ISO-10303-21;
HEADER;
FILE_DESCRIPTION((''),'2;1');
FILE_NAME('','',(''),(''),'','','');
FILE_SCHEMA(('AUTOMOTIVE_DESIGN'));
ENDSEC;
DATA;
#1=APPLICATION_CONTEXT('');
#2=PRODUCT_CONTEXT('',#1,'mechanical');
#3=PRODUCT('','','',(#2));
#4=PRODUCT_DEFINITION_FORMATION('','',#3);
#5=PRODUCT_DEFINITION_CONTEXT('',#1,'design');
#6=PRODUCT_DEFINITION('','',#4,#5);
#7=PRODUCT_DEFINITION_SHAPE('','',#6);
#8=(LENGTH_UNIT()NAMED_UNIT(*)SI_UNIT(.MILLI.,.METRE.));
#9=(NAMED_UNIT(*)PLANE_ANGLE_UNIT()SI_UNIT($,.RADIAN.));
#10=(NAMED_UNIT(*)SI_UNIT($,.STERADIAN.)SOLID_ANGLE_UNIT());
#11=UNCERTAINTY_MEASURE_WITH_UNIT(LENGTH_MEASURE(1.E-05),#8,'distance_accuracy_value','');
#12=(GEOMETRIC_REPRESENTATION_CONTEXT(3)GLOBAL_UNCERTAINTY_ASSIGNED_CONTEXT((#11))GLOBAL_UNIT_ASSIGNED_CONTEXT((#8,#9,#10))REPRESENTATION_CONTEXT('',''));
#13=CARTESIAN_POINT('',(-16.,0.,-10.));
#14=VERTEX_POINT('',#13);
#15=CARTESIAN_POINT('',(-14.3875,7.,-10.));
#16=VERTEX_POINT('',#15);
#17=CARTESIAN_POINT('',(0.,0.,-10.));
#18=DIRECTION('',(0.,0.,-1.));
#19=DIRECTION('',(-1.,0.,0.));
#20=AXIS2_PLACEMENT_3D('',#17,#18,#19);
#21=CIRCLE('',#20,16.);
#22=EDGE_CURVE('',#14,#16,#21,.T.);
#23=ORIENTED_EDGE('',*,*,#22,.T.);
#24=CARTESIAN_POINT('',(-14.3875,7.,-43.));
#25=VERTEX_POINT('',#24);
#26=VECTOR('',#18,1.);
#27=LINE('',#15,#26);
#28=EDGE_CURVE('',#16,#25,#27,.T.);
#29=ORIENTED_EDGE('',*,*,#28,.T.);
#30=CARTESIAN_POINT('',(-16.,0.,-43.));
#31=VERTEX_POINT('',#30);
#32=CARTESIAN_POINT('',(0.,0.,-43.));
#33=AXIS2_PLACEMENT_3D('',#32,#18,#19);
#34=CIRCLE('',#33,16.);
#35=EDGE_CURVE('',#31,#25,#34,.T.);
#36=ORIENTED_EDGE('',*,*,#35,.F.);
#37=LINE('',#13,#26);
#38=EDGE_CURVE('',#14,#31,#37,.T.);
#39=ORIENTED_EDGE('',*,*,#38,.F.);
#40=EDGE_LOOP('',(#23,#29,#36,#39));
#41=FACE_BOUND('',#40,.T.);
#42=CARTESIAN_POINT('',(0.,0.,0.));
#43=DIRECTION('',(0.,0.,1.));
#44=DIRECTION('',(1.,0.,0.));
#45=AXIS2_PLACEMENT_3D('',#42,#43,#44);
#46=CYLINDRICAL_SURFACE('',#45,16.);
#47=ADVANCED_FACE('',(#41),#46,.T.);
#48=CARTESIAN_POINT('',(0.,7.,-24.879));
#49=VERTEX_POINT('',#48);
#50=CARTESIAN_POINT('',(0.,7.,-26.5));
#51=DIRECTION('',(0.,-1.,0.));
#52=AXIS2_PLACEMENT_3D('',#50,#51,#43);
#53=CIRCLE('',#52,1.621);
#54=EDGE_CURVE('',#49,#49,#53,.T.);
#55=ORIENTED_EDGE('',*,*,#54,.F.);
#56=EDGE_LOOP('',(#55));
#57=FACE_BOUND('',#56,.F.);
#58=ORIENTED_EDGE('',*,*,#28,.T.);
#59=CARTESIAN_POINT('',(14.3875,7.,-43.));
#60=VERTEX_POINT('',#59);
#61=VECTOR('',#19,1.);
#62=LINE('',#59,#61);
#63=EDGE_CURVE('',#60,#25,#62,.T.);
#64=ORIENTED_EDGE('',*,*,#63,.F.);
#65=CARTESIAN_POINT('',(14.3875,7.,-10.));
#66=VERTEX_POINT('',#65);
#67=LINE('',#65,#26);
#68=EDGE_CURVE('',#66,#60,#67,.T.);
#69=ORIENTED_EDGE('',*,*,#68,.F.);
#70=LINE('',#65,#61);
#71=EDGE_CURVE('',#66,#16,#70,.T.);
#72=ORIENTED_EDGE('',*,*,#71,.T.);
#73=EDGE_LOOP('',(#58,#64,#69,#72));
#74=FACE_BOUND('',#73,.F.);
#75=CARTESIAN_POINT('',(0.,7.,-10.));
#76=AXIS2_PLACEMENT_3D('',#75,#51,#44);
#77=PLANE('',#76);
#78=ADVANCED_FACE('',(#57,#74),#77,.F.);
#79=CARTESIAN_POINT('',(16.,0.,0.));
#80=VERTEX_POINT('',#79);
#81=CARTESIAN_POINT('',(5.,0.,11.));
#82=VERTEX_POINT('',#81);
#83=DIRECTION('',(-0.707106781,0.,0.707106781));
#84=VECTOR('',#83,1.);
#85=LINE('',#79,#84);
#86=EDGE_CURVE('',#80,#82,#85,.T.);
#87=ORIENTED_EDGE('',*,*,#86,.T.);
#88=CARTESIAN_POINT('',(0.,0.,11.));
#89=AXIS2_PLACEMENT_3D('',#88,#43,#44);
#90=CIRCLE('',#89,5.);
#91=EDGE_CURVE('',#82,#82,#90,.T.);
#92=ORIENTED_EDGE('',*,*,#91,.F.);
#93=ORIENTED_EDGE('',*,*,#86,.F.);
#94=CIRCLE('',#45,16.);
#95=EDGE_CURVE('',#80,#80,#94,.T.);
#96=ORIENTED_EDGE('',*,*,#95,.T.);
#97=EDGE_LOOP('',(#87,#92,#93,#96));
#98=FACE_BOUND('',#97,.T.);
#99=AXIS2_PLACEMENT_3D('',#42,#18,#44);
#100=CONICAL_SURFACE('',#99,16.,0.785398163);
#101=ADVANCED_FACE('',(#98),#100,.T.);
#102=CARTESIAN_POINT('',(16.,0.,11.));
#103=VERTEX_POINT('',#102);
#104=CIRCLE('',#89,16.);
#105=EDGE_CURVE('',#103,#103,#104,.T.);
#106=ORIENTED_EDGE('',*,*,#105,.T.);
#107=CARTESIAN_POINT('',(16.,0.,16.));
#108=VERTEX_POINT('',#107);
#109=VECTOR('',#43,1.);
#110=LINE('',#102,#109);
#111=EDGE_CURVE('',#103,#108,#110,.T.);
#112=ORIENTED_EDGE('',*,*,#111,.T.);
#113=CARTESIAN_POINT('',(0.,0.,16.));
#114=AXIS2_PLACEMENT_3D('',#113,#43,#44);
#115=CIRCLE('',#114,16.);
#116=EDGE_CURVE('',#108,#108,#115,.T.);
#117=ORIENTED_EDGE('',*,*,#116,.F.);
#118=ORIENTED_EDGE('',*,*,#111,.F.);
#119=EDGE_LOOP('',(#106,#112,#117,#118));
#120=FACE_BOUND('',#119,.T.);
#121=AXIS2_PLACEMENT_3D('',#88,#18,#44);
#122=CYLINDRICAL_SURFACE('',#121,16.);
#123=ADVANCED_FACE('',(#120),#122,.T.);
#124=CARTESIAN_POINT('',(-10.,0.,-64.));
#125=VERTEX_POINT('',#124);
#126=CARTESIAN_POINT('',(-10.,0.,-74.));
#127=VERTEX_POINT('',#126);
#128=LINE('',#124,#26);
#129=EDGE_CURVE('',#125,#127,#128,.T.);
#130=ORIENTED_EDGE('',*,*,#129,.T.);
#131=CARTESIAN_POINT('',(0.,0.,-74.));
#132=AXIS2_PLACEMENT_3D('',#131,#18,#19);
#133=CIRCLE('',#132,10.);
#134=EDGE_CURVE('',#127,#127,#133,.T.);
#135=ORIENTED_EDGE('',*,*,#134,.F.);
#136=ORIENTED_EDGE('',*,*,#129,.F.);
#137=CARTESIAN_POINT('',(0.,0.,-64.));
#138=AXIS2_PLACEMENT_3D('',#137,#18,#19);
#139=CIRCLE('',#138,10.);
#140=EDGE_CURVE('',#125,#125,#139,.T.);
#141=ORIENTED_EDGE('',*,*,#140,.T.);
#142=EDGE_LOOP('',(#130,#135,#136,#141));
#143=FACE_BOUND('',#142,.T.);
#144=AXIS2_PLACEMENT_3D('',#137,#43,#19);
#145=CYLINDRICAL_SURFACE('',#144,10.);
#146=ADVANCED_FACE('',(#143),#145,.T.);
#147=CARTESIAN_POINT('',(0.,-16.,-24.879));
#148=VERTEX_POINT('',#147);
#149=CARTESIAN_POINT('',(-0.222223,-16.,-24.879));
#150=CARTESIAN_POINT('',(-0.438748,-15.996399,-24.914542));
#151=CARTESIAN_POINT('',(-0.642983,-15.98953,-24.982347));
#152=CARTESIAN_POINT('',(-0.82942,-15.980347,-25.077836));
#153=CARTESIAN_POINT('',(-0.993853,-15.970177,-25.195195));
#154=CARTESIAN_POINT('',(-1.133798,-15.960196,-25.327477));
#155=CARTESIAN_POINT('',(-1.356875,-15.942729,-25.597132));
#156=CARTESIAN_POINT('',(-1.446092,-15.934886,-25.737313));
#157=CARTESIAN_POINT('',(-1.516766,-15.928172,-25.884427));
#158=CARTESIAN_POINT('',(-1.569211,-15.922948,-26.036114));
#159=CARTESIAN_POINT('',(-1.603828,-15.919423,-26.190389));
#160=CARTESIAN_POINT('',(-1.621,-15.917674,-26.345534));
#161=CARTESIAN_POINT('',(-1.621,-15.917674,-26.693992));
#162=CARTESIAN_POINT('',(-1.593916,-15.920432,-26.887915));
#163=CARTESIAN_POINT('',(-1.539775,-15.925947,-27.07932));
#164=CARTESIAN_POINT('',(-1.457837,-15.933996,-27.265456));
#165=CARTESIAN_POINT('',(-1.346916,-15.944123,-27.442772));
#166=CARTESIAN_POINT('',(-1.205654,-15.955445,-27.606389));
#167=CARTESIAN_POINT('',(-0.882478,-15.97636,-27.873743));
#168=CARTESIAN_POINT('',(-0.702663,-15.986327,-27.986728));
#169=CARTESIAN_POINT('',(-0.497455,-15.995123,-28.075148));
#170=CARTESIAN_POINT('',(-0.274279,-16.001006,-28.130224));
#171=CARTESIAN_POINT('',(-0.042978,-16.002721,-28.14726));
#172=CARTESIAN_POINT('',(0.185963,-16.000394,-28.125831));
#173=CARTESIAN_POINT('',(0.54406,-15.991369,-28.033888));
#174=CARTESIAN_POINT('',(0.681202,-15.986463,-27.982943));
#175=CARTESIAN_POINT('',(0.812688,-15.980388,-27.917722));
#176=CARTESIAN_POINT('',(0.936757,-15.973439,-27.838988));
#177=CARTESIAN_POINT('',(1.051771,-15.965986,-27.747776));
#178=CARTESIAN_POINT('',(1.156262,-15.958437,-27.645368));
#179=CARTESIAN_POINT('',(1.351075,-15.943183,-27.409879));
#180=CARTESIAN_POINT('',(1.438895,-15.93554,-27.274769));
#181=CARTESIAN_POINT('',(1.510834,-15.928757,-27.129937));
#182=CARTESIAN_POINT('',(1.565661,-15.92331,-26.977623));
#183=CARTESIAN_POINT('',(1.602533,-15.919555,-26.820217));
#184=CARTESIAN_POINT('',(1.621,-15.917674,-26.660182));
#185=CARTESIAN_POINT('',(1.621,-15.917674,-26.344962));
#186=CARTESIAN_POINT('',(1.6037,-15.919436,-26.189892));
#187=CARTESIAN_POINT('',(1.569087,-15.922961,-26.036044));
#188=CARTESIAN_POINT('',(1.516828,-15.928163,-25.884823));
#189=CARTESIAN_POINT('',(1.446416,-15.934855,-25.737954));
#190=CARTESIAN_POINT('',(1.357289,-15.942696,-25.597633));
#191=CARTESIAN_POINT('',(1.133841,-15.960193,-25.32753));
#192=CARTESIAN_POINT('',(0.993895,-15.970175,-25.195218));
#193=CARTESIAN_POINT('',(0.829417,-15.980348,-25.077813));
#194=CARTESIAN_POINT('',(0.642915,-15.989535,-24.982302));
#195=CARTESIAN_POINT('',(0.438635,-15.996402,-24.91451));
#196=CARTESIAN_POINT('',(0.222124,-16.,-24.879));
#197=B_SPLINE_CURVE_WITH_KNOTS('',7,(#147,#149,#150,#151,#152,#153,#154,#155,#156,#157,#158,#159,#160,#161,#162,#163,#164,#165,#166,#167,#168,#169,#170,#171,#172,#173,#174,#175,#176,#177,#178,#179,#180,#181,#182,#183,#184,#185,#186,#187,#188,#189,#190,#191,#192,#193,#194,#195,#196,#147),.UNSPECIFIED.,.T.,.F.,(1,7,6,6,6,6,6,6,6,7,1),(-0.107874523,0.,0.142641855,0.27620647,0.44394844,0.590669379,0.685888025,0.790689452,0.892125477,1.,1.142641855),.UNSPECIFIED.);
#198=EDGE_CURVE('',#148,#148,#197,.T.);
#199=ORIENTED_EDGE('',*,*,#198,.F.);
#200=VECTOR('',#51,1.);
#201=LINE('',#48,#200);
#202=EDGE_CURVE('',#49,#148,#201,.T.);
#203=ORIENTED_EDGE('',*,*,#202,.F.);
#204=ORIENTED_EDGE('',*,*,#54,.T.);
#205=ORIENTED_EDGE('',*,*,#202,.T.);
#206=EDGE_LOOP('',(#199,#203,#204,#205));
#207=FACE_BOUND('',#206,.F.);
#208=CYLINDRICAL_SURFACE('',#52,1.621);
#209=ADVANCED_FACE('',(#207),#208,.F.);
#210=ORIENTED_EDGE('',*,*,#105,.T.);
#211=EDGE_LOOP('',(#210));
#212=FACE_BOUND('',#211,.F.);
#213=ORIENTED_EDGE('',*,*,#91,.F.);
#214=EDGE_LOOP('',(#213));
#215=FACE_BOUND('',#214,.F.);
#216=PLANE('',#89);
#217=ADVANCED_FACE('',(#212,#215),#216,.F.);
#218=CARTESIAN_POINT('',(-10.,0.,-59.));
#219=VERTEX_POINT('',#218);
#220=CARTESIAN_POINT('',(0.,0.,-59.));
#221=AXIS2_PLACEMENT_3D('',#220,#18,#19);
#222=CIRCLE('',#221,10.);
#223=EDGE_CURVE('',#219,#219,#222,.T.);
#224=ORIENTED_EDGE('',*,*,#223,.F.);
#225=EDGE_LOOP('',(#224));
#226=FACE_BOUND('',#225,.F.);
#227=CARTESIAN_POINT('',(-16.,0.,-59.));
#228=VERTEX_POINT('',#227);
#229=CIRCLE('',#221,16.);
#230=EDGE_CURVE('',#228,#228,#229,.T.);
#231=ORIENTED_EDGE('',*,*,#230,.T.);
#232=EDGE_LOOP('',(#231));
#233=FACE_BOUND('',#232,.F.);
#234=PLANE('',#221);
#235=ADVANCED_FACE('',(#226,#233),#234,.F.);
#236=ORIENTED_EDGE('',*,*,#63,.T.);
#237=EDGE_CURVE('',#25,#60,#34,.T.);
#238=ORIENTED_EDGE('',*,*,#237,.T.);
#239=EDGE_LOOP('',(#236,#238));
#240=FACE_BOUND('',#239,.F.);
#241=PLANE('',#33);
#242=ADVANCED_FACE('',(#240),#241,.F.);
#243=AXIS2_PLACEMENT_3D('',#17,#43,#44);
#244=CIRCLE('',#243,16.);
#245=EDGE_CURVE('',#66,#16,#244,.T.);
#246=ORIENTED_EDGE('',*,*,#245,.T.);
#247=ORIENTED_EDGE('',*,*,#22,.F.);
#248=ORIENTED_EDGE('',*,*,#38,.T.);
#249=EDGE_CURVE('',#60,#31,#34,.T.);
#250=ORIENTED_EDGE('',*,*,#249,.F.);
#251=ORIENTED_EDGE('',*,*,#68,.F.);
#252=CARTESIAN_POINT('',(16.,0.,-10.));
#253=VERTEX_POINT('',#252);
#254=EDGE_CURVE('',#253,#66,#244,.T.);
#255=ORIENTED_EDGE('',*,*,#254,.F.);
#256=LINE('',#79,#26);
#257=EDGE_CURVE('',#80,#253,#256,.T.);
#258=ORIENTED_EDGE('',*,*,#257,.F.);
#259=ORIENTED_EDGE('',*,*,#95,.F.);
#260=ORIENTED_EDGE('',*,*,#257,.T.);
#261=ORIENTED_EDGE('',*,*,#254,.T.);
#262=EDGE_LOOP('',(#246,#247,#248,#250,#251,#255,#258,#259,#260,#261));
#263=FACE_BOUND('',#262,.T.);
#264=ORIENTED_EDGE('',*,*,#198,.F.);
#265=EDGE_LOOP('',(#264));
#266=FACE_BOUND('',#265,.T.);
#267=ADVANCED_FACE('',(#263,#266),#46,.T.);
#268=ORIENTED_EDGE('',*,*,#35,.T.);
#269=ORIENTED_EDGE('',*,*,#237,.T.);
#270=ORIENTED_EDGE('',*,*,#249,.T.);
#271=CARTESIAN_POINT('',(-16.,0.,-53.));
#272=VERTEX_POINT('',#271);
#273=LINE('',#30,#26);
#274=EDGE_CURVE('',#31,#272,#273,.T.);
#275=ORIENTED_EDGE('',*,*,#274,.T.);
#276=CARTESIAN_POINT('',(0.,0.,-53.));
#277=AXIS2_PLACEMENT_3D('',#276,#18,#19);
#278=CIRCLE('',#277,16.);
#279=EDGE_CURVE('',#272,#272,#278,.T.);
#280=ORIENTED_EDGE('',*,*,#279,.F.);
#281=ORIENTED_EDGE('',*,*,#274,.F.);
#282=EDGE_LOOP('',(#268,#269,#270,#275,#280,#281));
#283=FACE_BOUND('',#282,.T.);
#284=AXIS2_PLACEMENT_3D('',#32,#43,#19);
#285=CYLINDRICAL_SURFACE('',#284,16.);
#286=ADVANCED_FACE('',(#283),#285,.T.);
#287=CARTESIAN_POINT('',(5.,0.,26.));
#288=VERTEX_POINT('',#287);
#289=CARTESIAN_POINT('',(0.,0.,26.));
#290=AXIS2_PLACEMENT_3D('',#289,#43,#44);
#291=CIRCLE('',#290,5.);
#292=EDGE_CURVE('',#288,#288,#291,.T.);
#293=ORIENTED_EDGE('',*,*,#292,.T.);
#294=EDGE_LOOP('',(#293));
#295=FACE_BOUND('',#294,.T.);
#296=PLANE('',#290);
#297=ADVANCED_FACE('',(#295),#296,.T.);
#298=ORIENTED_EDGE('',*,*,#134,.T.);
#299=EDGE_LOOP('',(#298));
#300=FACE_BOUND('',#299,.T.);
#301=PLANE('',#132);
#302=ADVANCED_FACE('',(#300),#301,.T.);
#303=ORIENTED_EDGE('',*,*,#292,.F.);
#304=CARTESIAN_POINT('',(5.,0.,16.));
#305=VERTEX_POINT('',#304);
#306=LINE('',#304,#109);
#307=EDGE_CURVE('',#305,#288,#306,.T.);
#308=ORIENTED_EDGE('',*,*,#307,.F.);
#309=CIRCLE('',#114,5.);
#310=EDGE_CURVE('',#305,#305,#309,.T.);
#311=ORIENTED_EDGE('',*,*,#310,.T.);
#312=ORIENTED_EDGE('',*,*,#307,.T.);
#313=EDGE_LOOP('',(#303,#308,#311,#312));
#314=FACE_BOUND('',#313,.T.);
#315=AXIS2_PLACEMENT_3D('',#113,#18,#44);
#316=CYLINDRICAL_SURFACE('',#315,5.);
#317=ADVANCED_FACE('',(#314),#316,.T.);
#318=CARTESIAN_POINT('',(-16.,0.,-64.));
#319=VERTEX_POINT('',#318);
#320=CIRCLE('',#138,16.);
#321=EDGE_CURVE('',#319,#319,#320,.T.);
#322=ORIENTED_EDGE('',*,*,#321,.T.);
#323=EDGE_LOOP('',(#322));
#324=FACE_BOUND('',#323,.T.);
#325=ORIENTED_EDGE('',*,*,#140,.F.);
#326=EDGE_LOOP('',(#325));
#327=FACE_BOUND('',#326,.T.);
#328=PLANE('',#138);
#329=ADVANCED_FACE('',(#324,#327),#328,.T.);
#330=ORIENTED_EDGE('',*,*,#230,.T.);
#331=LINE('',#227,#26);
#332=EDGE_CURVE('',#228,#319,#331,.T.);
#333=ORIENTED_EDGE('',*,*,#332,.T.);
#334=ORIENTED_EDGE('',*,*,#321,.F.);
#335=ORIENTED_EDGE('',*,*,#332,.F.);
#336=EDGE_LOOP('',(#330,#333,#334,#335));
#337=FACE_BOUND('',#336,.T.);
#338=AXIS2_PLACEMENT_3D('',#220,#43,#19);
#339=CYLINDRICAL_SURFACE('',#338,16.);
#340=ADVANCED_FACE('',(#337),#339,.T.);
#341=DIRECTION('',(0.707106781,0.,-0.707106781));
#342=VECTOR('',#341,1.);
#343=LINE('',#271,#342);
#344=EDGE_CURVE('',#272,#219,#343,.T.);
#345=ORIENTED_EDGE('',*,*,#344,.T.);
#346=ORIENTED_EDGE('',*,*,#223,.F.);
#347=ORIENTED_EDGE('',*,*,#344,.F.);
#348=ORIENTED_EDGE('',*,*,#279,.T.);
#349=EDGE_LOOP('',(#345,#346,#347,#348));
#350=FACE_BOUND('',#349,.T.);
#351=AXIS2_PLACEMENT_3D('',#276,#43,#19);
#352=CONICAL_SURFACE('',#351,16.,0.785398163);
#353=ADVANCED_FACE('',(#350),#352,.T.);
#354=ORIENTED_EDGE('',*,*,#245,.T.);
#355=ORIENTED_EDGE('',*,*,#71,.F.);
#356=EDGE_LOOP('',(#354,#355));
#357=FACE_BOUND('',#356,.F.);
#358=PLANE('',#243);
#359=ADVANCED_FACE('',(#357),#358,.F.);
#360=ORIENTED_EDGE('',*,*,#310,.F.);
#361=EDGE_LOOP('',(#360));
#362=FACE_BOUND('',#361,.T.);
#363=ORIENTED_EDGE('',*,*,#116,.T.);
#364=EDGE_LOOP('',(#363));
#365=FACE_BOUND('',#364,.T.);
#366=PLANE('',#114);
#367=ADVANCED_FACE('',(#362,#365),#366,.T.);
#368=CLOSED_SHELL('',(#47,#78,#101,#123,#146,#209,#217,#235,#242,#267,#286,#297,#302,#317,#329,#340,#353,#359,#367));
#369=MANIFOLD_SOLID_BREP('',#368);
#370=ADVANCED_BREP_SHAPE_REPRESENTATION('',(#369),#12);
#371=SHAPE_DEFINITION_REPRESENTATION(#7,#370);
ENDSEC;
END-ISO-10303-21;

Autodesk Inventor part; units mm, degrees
ref_plane "YZ Plane" through (0, 0, 0) normal (1, 0, 0) x (0, 1, 0)
ref_plane "XZ Plane" through (0, 0, 0) normal (0, 1, 0) x (-1, 0, 0)
ref_plane "XY Plane" through (0, 0, 0) normal (0, 0, 1) x (1, 0, 0)
sketch "Sketch1" plane through (0, 0, 0) normal (0, 0, 1) x (1, 0, 0)
  circle A0 centre (0, 0) radius 16
  dimension "d0" = 32
extrude "Extrusion1" add sketch "Sketch1" against normal blind 10
sketch "Sketch2" plane through (0, 0, -10) normal (0, 0, -1) x (-1, 0, 0)
  line L0 (0, 7) -> (-14.3875, 7)
  circle A0 centre (0, 0) radius 16 projected
  line L1 (0, 7) -> (14.3875, 7)
  arc A1 (-14.3875, 7) -> (14.3875, 7) centre (0, 0) ccw
  dimension "d3" = 7
extrude "Extrusion2" add sketch "Sketch2" along normal blind 33 contours L1 A0 L0 picked at (0.14, -8.2559)
sketch "Sketch3" plane through (0, 0, -43) normal (0, 0, -1) x (-1, 0, 0)
  circle A0 centre (0, 0) radius 16
  dimension "d6" = 32
extrude "Extrusion3" add sketch "Sketch3" along normal blind 10
sketch "Sketch4" plane through (0, 0, -53) normal (0, 0, -1) x (-1, 0, 0)
  circle A0 centre (0, 0) radius 16
  dimension "d9" = 32
extrude "Extrusion4" add sketch "Sketch4" along normal blind 6 draft -45
sketch "Sketch5" plane through (0, 0, -59) normal (0, 0, -1) x (-1, 0, 0)
  circle A0 centre (0, 0) radius 16
  dimension "d12" = 32
extrude "Extrusion5" add sketch "Sketch5" along normal blind 5
sketch "Sketch6" plane through (0, 0, -64) normal (0, 0, -1) x (-1, 0, 0)
  circle A0 centre (0, 0) radius 10
  dimension "d15" = 20
extrude "Extrusion6" add sketch "Sketch6" along normal blind 10
sketch "Sketch7" plane through (0, 0, 0) normal (0, 0, 1) x (1, 0, 0)
  circle A0 centre (0, 0) radius 16
  dimension "d18" = 32
extrude "Extrusion7" add sketch "Sketch7" along normal blind 11 draft -45
sketch "Sketch8" plane through (0, 0, 11) normal (0, 0, 1) x (1, 0, 0)
  circle A0 centre (0, 0) radius 16
  dimension "d21" = 32
extrude "Extrusion8" add sketch "Sketch8" along normal blind 5
sketch "Sketch9" plane through (0, 0, 16) normal (0, 0, 1) x (1, 0, 0)
  circle A0 centre (0, 0) radius 5
  dimension "d24" = 10
extrude "Extrusion9" add sketch "Sketch9" along normal blind 10
sketch "Sketch10" plane through (-14.3875, 7, -10) normal (0, 1, 0) x (1, 0, 0)
  line L0 (0, 0) -> (0, 33) projected
  line L1 (28.775, 0) -> (28.775, 33) projected
  circle A0 centre (14.3875, 16.5) radius 2
  point P0 (14.3875, -10)
  dimension "d27" = 4
hole "Hole1" at (0, 7, -26.5) direction (0, -1, 0) diameter 3.242 end through all thread size "M4x0.7" class "6H" standard "ANSI Metric M Profile"
properties part number "MMAE 232 Assignment 1_Part 2 - Dylan Tamras"
